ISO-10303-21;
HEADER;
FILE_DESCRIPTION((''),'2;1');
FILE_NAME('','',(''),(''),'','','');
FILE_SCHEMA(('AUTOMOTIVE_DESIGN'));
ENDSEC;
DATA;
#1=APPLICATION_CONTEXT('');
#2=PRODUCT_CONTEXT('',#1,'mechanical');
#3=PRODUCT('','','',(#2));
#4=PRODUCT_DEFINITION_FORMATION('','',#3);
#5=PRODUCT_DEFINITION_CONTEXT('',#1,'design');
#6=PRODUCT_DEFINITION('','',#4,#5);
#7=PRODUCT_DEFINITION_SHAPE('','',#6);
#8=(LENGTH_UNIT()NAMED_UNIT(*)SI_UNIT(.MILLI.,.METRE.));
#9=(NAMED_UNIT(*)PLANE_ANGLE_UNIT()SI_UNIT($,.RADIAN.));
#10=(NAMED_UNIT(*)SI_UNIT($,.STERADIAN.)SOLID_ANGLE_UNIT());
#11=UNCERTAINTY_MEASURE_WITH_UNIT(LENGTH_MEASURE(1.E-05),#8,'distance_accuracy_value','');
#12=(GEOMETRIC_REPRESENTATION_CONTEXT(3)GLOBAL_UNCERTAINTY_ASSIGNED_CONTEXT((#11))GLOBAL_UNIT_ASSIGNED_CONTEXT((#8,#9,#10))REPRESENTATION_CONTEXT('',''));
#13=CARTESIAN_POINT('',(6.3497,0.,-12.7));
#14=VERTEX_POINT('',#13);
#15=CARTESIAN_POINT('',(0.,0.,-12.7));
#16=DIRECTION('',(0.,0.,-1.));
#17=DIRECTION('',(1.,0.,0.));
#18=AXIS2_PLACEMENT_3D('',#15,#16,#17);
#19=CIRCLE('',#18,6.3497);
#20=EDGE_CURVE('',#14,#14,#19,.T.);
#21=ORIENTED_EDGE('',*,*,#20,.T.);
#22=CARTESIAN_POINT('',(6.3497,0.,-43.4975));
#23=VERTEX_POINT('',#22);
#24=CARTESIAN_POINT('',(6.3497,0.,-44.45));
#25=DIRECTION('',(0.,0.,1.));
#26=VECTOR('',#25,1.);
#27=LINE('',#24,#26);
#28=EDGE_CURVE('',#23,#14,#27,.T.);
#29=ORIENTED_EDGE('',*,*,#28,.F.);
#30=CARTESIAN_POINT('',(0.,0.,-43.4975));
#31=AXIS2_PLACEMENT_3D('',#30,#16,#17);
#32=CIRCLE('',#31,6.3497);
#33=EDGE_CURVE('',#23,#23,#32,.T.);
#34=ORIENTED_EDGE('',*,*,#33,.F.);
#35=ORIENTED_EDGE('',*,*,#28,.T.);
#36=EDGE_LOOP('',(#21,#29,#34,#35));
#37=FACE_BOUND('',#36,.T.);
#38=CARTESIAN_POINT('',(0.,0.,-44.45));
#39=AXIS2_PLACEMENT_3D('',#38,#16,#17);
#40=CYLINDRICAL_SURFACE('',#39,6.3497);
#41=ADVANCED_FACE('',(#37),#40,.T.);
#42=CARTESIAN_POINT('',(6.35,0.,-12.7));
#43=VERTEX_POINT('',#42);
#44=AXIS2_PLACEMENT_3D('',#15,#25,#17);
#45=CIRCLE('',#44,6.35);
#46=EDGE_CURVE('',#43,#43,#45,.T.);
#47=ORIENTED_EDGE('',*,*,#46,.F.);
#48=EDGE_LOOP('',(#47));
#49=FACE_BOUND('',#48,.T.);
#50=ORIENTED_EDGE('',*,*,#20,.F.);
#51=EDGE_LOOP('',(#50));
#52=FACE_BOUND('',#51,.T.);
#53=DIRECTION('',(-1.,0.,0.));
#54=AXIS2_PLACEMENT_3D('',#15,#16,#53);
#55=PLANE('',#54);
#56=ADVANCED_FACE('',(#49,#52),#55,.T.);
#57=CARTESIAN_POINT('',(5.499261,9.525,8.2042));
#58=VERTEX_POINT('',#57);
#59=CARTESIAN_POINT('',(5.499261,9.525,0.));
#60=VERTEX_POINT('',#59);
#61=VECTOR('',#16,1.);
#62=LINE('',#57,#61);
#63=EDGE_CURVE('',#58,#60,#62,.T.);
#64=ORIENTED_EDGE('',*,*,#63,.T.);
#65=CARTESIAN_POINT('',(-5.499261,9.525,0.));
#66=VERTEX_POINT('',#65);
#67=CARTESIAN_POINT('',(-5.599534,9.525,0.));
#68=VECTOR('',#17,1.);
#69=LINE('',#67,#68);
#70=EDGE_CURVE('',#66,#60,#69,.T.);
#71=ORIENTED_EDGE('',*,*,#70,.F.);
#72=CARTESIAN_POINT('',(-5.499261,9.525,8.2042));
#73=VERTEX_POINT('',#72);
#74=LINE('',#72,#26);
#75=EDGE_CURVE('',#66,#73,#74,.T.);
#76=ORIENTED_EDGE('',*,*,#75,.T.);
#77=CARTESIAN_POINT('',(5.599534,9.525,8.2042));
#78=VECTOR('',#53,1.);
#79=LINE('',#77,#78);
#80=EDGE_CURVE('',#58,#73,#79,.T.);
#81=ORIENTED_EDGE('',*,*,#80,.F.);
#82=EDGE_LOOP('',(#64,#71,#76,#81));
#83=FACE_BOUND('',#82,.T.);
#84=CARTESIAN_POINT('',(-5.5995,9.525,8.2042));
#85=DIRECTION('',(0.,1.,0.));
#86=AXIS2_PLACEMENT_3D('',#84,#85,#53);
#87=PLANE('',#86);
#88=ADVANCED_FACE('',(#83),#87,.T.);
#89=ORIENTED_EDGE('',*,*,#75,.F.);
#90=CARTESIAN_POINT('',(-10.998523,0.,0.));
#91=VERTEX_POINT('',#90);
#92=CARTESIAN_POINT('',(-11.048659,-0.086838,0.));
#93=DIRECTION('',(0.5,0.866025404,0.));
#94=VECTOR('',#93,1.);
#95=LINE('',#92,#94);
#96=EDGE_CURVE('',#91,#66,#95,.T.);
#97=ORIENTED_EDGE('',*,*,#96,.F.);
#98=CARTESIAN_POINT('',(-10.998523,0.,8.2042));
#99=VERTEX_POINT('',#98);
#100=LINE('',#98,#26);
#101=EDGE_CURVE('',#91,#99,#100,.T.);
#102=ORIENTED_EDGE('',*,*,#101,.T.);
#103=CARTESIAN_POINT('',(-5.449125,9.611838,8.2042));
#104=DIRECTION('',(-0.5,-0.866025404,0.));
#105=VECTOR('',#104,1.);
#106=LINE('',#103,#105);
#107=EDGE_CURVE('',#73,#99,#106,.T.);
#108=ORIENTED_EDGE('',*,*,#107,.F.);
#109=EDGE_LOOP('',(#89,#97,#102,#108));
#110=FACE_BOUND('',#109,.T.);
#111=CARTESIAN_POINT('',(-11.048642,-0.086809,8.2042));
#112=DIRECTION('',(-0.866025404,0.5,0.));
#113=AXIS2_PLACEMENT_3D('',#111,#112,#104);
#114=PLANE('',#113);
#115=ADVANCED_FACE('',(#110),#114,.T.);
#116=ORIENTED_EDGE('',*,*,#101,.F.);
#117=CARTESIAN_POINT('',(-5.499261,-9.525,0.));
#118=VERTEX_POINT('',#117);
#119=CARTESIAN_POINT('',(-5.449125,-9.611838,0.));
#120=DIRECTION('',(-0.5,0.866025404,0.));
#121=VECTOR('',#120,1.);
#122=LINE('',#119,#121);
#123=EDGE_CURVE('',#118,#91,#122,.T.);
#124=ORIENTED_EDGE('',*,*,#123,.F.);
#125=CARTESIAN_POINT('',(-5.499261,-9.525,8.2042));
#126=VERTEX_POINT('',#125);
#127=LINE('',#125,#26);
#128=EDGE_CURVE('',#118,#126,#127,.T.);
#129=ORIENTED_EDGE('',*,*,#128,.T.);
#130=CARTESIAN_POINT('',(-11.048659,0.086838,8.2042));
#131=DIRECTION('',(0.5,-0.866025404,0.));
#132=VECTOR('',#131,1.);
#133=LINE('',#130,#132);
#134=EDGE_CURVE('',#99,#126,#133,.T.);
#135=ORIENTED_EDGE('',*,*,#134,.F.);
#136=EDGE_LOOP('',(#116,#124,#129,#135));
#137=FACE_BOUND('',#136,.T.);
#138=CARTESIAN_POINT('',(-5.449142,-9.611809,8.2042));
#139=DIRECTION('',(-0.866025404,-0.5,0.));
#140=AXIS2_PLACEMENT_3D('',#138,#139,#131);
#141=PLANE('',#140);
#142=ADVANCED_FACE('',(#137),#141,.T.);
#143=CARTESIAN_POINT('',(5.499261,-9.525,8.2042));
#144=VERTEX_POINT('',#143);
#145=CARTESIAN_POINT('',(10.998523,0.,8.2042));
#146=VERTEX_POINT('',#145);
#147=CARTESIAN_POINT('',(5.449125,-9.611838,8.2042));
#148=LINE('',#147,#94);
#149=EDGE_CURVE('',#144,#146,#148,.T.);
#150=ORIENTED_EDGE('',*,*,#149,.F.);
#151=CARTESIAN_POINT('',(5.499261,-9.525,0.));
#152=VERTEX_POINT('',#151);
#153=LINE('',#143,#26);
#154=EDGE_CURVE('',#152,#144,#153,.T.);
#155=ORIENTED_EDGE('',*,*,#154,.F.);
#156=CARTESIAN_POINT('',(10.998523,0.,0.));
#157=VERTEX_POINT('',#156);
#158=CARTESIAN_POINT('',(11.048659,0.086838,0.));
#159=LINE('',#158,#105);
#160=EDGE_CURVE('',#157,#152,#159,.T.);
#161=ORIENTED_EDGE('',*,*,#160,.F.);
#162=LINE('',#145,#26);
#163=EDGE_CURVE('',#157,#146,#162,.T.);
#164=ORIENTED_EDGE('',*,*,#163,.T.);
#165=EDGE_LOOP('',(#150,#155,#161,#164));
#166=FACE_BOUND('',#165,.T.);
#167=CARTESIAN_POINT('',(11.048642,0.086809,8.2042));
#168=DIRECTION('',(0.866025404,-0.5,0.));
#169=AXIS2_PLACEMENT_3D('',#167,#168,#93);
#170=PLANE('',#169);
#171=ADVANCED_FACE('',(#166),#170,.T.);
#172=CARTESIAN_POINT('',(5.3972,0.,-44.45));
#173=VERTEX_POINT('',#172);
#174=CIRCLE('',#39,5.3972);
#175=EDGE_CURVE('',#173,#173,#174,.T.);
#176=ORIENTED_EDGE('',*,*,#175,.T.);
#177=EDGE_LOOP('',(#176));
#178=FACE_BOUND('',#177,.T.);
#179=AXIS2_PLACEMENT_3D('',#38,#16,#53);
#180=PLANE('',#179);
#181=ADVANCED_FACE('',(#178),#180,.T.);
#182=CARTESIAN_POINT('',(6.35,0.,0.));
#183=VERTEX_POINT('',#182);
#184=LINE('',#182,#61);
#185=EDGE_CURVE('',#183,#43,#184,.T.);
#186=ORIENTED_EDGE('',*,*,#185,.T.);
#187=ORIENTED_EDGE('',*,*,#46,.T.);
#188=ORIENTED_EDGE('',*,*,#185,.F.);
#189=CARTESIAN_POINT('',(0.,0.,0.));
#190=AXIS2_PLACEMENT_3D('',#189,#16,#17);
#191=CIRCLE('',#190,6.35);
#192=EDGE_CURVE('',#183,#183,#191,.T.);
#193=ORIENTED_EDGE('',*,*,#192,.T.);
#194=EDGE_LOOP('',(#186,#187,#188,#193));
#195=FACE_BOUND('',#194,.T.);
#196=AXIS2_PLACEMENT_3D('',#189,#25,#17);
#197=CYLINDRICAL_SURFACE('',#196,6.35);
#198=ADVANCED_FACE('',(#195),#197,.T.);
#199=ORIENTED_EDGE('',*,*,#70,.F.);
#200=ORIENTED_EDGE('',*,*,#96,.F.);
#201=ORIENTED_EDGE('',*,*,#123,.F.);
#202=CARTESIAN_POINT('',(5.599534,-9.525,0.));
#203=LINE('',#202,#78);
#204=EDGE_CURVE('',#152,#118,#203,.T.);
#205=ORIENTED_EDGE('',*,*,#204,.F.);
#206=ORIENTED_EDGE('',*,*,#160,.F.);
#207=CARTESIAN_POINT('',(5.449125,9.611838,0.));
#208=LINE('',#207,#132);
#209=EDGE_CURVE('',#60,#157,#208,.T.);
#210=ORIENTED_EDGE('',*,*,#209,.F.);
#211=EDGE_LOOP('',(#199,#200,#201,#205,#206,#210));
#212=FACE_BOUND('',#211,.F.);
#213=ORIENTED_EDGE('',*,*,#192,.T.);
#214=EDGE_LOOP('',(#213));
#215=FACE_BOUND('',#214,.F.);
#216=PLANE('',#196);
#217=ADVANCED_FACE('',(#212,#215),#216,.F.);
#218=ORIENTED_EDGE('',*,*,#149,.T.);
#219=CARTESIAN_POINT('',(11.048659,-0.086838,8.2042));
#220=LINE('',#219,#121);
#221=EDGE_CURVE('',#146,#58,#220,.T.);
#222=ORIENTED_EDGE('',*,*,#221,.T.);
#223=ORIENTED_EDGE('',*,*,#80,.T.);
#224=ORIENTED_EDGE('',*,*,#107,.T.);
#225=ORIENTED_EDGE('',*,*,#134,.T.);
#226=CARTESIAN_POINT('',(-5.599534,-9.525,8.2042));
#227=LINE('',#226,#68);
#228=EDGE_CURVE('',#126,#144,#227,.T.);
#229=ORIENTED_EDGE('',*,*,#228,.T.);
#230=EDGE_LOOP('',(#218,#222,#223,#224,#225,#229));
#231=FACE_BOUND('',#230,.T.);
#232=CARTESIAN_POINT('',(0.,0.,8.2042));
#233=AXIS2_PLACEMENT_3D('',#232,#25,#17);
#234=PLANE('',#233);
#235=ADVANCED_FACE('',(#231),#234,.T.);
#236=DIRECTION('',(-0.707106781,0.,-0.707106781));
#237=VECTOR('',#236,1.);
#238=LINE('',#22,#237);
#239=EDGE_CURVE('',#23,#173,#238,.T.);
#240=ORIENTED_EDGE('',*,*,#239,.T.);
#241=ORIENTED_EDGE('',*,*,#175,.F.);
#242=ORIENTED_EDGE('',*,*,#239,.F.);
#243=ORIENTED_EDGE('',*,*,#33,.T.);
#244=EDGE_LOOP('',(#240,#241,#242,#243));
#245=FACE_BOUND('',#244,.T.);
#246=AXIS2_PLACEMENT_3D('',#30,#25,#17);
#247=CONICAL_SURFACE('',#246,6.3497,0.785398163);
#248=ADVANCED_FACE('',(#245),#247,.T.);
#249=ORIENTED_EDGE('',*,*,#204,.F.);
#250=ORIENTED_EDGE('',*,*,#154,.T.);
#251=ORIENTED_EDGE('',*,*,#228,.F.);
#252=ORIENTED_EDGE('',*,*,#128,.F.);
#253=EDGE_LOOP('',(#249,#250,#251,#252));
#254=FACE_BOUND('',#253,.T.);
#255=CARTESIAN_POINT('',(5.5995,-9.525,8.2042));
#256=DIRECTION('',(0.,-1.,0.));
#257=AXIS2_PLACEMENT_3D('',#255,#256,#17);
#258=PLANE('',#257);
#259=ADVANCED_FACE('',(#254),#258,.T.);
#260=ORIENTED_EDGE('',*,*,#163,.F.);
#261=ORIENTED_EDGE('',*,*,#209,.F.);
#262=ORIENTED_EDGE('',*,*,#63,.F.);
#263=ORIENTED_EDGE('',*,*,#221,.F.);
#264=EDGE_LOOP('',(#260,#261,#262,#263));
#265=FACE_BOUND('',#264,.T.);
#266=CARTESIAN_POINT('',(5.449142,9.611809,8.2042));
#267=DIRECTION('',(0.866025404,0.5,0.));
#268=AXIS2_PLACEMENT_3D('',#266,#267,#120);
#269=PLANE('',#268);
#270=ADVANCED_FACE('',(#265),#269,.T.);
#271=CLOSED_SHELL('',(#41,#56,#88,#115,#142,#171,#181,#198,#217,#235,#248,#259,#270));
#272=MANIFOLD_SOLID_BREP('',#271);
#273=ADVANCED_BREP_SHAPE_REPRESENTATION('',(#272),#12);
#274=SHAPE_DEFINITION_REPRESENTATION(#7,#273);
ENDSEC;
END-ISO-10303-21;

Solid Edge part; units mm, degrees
sketch "Sketch1" plane through (0, 0, 0) normal (0, 0, 1) x (1, 0, 0)
  circle A0 centre (0, 0) radius 11.049
  dimension "D1" = 22.098
extrude "Protrusion1" add sketch "Sketch1" along normal blind 8.2042
sketch "Sketch2" plane through (0, 0, 0) normal (0, 0, -1) x (1, 0, 0)
  circle A0 centre (0, 0) radius 6.35
extrude "Protrusion2" add sketch "Sketch2" along normal blind 44.45
sketch "Sketch3" plane through (0, 0, -44.45) normal (0, 0, -1) x (1, 0, 0)
  circle A0 centre (0, 0) radius 6.3497
extrude "Cutout1" cut sketch "Sketch3" against normal blind 31.75 flip side to cut
chamfer "Chamfer_1" distance 0.9525 angle 45 1 edges at (-6.3497, 0, -44.45)
sketch "Sketch4" plane through (0, 0, 8.2042) normal (0, 0, 1) x (1, 0, 0)
  line L0 (-5.5995, 9.525) -> (5.5995, 9.525)
  dimension "D1" = 19.05
extrude "Cutout2" cut sketch "Sketch4" against normal up to next material side at (0, 9.575, 8.2042)
pattern_circular "Pattern1" count 6 over 360 about axis through (0, 0, 8.2042) along (0, 0, 1) of "Cutout2"
properties part number "117464"
